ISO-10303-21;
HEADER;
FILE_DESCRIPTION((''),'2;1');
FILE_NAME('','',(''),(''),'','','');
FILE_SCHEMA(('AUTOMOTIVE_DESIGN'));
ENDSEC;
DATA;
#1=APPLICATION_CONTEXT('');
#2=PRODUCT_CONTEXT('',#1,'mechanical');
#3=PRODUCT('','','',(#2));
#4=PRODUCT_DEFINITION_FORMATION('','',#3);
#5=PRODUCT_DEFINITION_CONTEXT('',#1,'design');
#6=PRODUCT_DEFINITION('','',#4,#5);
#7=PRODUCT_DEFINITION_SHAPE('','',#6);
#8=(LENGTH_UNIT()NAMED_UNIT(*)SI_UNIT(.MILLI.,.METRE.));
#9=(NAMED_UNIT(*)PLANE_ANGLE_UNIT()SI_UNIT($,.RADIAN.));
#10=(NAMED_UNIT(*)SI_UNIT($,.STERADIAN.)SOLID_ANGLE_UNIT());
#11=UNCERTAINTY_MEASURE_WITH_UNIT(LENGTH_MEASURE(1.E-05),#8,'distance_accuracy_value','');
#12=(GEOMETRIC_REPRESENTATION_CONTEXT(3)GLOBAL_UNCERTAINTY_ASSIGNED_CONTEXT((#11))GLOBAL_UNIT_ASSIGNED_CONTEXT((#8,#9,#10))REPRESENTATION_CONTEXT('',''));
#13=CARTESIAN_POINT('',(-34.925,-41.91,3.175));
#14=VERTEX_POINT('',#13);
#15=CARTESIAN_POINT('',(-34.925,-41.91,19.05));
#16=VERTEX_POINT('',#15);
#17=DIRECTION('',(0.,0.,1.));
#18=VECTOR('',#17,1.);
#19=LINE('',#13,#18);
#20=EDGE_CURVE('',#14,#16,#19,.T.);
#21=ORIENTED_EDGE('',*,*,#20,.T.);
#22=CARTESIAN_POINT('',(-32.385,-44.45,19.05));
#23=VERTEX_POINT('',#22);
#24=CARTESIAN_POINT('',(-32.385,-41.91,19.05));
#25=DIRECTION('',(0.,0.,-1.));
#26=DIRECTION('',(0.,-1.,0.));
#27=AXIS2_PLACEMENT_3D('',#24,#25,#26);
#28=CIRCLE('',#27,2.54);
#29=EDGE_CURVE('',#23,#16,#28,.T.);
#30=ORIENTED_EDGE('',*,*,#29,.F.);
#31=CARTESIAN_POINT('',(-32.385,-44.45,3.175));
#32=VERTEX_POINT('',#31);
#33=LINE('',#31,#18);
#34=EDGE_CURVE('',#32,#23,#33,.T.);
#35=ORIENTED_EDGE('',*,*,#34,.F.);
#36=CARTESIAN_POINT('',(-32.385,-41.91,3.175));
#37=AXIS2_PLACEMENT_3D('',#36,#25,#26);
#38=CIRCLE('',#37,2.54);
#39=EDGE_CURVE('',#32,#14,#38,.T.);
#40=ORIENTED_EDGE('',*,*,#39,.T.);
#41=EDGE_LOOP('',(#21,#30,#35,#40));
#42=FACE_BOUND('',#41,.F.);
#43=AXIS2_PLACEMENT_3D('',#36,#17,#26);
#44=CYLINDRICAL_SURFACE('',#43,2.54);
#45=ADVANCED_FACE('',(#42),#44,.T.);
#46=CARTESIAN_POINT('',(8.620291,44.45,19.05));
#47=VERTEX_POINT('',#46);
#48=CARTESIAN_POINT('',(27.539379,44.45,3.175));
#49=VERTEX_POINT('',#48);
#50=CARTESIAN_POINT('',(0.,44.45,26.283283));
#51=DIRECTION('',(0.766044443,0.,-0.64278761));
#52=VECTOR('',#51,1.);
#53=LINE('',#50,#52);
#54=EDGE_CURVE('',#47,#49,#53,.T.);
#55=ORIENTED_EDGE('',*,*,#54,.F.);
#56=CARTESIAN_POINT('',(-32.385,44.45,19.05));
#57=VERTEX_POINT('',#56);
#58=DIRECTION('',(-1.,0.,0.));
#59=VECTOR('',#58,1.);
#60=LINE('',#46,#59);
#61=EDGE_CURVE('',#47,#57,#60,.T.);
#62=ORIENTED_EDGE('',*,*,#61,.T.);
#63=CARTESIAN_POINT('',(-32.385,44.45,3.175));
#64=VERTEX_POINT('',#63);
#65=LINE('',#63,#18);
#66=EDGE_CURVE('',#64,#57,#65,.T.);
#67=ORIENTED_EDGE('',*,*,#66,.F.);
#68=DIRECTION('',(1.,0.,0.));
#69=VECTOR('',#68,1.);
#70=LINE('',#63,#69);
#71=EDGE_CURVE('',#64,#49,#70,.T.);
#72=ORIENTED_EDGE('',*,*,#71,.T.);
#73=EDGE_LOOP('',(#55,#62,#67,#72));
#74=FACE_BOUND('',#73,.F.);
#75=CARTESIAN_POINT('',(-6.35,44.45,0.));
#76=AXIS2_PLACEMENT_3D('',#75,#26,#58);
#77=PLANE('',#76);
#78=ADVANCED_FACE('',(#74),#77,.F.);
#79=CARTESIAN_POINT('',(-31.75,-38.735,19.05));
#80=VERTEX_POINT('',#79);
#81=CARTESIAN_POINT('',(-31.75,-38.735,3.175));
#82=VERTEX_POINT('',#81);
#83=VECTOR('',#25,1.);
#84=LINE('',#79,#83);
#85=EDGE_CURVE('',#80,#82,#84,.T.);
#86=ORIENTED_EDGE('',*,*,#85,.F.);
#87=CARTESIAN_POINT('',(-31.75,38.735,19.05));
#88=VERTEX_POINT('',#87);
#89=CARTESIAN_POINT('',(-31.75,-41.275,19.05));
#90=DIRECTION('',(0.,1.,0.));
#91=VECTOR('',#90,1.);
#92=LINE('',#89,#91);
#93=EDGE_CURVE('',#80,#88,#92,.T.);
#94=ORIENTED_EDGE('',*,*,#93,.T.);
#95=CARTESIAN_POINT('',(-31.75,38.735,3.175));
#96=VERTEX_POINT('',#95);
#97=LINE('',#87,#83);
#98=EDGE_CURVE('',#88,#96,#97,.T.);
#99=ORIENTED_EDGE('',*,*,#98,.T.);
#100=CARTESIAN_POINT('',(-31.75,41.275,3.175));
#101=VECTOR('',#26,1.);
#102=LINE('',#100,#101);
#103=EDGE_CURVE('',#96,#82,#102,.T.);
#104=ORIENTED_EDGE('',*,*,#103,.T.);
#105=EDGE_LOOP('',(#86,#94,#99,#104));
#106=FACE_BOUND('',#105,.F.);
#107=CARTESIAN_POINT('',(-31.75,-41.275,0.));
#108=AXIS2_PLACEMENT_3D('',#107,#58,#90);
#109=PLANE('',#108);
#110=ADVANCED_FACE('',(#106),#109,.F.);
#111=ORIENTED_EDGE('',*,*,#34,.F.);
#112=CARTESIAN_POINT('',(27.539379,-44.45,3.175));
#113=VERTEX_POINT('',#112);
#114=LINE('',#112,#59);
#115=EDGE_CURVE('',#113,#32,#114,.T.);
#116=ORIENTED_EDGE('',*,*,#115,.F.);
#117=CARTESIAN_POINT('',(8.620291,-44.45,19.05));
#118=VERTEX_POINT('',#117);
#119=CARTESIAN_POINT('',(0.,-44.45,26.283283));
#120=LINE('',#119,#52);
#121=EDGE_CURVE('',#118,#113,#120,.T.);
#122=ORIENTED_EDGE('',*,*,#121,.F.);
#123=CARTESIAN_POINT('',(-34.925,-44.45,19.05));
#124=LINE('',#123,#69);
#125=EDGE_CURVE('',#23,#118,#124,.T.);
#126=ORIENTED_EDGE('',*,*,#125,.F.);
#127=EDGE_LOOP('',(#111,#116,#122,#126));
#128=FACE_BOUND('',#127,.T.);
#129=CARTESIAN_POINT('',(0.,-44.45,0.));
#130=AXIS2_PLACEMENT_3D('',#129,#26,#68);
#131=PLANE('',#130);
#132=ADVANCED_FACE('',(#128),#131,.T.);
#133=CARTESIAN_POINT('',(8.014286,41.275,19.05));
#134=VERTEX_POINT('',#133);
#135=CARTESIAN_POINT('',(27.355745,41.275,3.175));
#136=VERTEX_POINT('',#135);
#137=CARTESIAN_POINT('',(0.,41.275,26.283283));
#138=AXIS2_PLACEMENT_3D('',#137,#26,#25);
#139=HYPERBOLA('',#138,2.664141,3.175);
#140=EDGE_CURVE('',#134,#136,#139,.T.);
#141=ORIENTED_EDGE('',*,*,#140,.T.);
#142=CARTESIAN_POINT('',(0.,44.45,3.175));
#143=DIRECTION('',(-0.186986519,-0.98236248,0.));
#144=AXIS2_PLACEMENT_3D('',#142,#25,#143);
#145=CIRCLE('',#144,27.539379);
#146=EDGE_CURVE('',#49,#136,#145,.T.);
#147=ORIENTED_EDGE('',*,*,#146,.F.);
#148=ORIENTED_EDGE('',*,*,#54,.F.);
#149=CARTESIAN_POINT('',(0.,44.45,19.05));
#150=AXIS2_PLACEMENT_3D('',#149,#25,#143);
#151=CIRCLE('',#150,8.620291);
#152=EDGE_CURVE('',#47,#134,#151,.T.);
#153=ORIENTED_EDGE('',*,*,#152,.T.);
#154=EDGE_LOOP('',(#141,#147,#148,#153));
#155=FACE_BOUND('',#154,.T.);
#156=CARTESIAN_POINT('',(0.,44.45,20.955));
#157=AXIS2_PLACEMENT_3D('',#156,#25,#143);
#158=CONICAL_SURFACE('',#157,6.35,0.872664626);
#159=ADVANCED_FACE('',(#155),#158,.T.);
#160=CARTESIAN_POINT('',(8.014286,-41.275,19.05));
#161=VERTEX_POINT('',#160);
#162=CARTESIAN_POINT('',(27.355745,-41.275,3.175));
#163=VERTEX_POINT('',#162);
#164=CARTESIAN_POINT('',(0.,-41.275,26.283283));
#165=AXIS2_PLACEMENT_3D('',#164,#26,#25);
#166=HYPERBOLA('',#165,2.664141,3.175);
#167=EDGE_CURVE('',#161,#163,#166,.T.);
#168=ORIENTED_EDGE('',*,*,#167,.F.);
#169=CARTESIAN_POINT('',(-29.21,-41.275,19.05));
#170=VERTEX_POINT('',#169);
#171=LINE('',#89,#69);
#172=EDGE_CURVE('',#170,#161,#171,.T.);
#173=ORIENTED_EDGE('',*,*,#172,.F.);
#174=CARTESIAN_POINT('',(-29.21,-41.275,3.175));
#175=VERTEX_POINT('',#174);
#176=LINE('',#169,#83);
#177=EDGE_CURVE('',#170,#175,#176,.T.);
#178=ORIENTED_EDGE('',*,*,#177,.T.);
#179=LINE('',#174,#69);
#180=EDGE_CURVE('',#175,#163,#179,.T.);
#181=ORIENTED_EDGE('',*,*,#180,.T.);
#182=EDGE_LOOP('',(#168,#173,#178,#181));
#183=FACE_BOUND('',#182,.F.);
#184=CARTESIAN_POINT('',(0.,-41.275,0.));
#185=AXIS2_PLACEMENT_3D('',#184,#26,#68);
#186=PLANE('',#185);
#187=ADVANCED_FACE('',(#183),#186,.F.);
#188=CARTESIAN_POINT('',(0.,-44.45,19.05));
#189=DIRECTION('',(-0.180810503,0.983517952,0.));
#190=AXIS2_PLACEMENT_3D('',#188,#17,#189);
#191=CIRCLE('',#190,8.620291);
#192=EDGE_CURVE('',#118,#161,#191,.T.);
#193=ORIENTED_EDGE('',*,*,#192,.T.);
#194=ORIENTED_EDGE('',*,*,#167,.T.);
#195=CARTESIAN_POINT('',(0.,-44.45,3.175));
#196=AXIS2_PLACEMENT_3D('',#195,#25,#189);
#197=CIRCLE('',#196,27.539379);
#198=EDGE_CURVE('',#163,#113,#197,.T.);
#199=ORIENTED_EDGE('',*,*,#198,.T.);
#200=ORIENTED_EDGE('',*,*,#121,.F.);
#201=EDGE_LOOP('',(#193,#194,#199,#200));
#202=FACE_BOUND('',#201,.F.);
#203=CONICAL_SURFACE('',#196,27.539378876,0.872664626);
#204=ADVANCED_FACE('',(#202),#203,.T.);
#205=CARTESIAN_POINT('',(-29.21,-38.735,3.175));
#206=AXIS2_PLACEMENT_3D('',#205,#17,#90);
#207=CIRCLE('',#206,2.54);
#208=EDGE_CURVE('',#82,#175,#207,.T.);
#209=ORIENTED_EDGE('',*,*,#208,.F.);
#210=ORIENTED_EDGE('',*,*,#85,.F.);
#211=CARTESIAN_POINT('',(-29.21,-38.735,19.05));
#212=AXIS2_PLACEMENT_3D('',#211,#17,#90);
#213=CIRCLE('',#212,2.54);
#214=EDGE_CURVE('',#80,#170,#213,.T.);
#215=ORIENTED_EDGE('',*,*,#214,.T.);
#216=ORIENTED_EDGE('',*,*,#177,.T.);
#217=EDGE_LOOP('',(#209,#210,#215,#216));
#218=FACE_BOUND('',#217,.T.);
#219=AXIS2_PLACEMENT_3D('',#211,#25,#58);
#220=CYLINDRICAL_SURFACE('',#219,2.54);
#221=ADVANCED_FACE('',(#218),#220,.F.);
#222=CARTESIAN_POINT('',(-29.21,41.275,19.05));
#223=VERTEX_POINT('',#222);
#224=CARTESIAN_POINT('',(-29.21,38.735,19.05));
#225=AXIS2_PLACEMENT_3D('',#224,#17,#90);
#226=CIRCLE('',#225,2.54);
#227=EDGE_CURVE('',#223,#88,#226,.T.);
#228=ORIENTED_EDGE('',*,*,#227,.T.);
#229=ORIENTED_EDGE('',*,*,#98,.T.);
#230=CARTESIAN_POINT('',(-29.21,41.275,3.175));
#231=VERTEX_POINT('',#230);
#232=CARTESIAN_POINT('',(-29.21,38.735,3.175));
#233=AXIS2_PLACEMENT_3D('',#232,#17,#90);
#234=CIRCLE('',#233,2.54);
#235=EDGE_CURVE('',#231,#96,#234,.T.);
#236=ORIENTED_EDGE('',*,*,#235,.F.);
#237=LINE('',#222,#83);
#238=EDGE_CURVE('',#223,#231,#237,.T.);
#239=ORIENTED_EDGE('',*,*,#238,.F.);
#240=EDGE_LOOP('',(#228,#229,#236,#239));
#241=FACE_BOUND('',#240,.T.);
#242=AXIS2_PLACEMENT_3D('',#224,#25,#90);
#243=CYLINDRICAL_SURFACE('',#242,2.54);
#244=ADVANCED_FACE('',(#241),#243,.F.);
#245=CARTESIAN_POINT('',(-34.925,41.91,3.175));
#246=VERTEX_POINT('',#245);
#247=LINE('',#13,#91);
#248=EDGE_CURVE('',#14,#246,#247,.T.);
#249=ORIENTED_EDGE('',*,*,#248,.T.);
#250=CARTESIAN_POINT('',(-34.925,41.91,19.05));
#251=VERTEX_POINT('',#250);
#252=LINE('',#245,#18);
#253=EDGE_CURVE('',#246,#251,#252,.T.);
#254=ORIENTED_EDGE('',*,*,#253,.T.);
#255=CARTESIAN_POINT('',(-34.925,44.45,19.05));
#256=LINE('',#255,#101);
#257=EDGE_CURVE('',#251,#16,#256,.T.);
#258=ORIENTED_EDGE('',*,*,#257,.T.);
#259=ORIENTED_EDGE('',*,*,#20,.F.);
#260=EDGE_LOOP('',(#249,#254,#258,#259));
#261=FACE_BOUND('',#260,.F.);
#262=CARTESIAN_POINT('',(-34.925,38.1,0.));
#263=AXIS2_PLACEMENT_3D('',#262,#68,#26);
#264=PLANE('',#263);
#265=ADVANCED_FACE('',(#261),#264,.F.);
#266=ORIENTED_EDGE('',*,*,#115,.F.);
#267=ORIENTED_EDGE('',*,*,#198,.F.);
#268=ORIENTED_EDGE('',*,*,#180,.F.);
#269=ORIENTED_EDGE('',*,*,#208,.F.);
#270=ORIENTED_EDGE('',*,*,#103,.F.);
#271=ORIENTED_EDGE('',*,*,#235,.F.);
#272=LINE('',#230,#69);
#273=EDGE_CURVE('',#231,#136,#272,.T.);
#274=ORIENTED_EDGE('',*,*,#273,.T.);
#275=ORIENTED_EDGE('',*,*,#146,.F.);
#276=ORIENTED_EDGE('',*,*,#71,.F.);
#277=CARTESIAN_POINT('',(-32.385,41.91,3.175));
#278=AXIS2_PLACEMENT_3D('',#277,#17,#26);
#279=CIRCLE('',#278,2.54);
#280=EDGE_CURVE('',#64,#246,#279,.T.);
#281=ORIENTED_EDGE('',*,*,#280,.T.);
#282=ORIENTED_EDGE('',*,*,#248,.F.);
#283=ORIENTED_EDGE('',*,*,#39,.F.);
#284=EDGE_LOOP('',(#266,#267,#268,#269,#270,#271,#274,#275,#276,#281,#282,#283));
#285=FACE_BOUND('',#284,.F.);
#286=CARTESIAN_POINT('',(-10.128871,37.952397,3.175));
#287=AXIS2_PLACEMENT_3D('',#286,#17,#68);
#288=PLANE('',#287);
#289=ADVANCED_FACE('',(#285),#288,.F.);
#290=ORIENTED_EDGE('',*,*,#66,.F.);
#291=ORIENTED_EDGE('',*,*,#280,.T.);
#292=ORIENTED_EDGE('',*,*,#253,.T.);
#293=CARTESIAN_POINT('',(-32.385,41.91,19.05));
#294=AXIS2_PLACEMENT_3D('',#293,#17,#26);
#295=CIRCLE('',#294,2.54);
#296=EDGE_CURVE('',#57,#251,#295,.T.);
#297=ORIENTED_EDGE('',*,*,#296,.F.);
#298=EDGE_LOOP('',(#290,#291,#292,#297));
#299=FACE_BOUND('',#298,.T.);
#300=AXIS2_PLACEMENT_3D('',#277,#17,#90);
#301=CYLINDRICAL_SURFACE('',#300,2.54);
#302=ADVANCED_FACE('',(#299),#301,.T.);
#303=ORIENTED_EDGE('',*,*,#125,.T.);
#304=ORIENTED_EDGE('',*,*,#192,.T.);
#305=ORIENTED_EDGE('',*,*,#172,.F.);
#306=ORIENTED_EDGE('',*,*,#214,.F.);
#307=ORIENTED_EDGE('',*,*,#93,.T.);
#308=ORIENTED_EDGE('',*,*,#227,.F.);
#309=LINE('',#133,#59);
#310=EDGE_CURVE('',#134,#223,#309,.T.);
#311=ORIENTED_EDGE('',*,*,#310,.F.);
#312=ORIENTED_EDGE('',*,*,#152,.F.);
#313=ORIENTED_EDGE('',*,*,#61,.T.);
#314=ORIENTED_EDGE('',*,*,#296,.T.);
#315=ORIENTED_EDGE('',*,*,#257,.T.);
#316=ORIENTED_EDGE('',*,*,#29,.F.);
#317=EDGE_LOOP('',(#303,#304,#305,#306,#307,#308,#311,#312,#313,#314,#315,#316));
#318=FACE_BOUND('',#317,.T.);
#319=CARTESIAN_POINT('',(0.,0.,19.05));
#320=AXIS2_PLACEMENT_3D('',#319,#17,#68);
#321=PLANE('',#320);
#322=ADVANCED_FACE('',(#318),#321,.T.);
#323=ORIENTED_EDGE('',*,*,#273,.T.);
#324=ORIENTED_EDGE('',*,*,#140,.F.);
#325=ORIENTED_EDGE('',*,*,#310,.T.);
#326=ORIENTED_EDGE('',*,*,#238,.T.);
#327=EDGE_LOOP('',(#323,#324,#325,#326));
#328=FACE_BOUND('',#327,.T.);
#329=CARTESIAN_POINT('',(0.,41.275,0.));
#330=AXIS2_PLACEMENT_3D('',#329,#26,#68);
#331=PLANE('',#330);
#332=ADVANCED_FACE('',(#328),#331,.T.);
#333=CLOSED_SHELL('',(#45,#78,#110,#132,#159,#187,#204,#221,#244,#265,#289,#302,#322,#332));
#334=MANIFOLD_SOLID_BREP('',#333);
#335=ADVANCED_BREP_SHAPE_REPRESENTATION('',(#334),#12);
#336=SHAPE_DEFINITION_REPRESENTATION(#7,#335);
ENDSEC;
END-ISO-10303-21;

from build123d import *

# Parameters (mm, degrees)
F1_DEPTH     = 3.175
F2_DEPTH     = 19.05
F3_DEPTH     = 3.175
F4_T4_ANGLE  = 359.64
F4_T11_ANGLE = 359.64
F4_T16_ANGLE = 359.64
F4_T18_ANGLE = 359.64
F5_R         = 2.54
F6_W         = 173.444584012
F6_H         = 315.2023479342
F7_DEPTH     = 3.175


# Not quite as in the source:
# - a fillet or chamfer that OpenCascade refuses, or shapes differently, is made with other operations: its cross-section is extruded or revolved along the edge and cut away or added


with BuildPart() as f1:
    # F0 (on Top) → F1 (new body)
    with BuildSketch(Plane.XY):
        with BuildLine():
            Line((-34.925, 44.45), (-28.575, 44.45))
            ThreePointArc((-28.575, 44.45), (-39.4151280605, 48.9401280605), (-34.925, 38.1))
            Line((-34.925, 38.1), (-34.925, 44.45))
        make_face()
        with BuildLine():
            ThreePointArc((6.35, 44.45), (0, 50.8), (-6.35, 44.45))
            Line((-6.35, 44.45), (6.35, 44.45))
        make_face()
        with BuildLine():
            Line((-34.925, -44.45), (-34.925, -38.1))
            ThreePointArc((-34.925, -38.1), (-39.4151280605, -48.9401280605), (-28.575, -44.45))
            Line((-28.575, -44.45), (-34.925, -44.45))
        make_face()
        with BuildLine():
            Line((6.35, -44.45), (-6.35, -44.45))
            ThreePointArc((-6.35, -44.45), (0, -50.8), (6.35, -44.45))
        make_face()
        with BuildLine():
            ThreePointArc((-28.575, 44.45), (-28.7913710031, 42.8064990636), (-29.425738686, 41.275))
            Line((-29.425738686, 41.275), (-5.499261314, 41.275))
            ThreePointArc((-5.499261314, 41.275), (-6.1336289969, 42.8064990636), (-6.35, 44.45))
            Line((-6.35, 44.45), (-28.575, 44.45))
        make_face()
        with BuildLine():
            Line((-5.499261314, -41.275), (-29.425738686, -41.275))
            ThreePointArc((-29.425738686, -41.275), (-28.7913710031, -42.8064990636), (-28.575, -44.45))
            Line((-28.575, -44.45), (-6.35, -44.45))
            ThreePointArc((-6.35, -44.45), (-6.1336289969, -42.8064990636), (-5.499261314, -41.275))
        make_face()
        with BuildLine():
            Line((-31.75, -38.950738686), (-31.75, 38.950738686))
            ThreePointArc((-31.75, 38.950738686), (-33.2814990636, 38.3163710031), (-34.925, 38.1))
            Line((-34.925, 38.1), (-34.925, -38.1))
            ThreePointArc((-34.925, -38.1), (-33.2814990636, -38.3163710031), (-31.75, -38.950738686))
        make_face()
        with BuildLine():
            Line((-31.75, 38.950738686), (-31.75, 41.275))
            Line((-31.75, 41.275), (-29.425738686, 41.275))
            ThreePointArc((-29.425738686, 41.275), (-28.7913710031, 42.8064990636), (-28.575, 44.45))
            Line((-28.575, 44.45), (-34.925, 44.45))
            Line((-34.925, 44.45), (-34.925, 38.1))
            ThreePointArc((-34.925, 38.1), (-33.2814990636, 38.3163710031), (-31.75, 38.950738686))
        make_face()
        with BuildLine():
            ThreePointArc((-6.35, 44.45), (-6.1336289969, 42.8064990636), (-5.499261314, 41.275))
            Line((-5.499261314, 41.275), (5.499261314, 41.275))
            ThreePointArc((5.499261314, 41.275), (6.1336289969, 42.8064990636), (6.35, 44.45))
            Line((6.35, 44.45), (-6.35, 44.45))
        make_face()
        with BuildLine():
            Line((-31.75, -41.275), (-31.75, -38.950738686))
            ThreePointArc((-31.75, -38.950738686), (-33.2814990636, -38.3163710031), (-34.925, -38.1))
            Line((-34.925, -38.1), (-34.925, -44.45))
            Line((-34.925, -44.45), (-28.575, -44.45))
            ThreePointArc((-28.575, -44.45), (-28.7913710031, -42.8064990636), (-29.425738686, -41.275))
            Line((-29.425738686, -41.275), (-31.75, -41.275))
        make_face()
        with BuildLine():
            Line((5.499261314, -41.275), (-5.499261314, -41.275))
            ThreePointArc((-5.499261314, -41.275), (-6.1336289969, -42.8064990636), (-6.35, -44.45))
            Line((-6.35, -44.45), (6.35, -44.45))
            ThreePointArc((6.35, -44.45), (6.1336289969, -42.8064990636), (5.499261314, -41.275))
        make_face()
    extrude(amount=F1_DEPTH)

    # F0 (on Top) → F2 (join)
    with BuildSketch(Plane.XY):
        with BuildLine():
            ThreePointArc((-28.575, 44.45), (-28.7913710031, 42.8064990636), (-29.425738686, 41.275))
            Line((-29.425738686, 41.275), (-5.499261314, 41.275))
            ThreePointArc((-5.499261314, 41.275), (-6.1336289969, 42.8064990636), (-6.35, 44.45))
            Line((-6.35, 44.45), (-28.575, 44.45))
        make_face()
        with BuildLine():
            ThreePointArc((-6.35, 44.45), (-6.1336289969, 42.8064990636), (-5.499261314, 41.275))
            Line((-5.499261314, 41.275), (5.499261314, 41.275))
            ThreePointArc((5.499261314, 41.275), (6.1336289969, 42.8064990636), (6.35, 44.45))
            Line((6.35, 44.45), (-6.35, 44.45))
        make_face()
        with BuildLine():
            Line((-31.75, 38.950738686), (-31.75, 41.275))
            Line((-31.75, 41.275), (-29.425738686, 41.275))
            ThreePointArc((-29.425738686, 41.275), (-28.7913710031, 42.8064990636), (-28.575, 44.45))
            Line((-28.575, 44.45), (-34.925, 44.45))
            Line((-34.925, 44.45), (-34.925, 38.1))
            ThreePointArc((-34.925, 38.1), (-33.2814990636, 38.3163710031), (-31.75, 38.950738686))
        make_face()
        with BuildLine():
            Line((-31.75, -38.950738686), (-31.75, 38.950738686))
            ThreePointArc((-31.75, 38.950738686), (-33.2814990636, 38.3163710031), (-34.925, 38.1))
            Line((-34.925, 38.1), (-34.925, -38.1))
            ThreePointArc((-34.925, -38.1), (-33.2814990636, -38.3163710031), (-31.75, -38.950738686))
        make_face()
        with BuildLine():
            Line((-31.75, -41.275), (-31.75, -38.950738686))
            ThreePointArc((-31.75, -38.950738686), (-33.2814990636, -38.3163710031), (-34.925, -38.1))
            Line((-34.925, -38.1), (-34.925, -44.45))
            Line((-34.925, -44.45), (-28.575, -44.45))
            ThreePointArc((-28.575, -44.45), (-28.7913710031, -42.8064990636), (-29.425738686, -41.275))
            Line((-29.425738686, -41.275), (-31.75, -41.275))
        make_face()
        with BuildLine():
            Line((-5.499261314, -41.275), (-29.425738686, -41.275))
            ThreePointArc((-29.425738686, -41.275), (-28.7913710031, -42.8064990636), (-28.575, -44.45))
            Line((-28.575, -44.45), (-6.35, -44.45))
            ThreePointArc((-6.35, -44.45), (-6.1336289969, -42.8064990636), (-5.499261314, -41.275))
        make_face()
        with BuildLine():
            Line((5.499261314, -41.275), (-5.499261314, -41.275))
            ThreePointArc((-5.499261314, -41.275), (-6.1336289969, -42.8064990636), (-6.35, -44.45))
            Line((-6.35, -44.45), (6.35, -44.45))
            ThreePointArc((6.35, -44.45), (6.1336289969, -42.8064990636), (5.499261314, -41.275))
        make_face()
    extrude(amount=F2_DEPTH)

    # F0 (on Top) → F3 (join)
    with BuildSketch(Plane.XY):
        with BuildLine():
            ThreePointArc((6.35, 44.45), (6.1336289969, 42.8064990636), (5.499261314, 41.275))
            Line((5.499261314, 41.275), (31.75, 41.275))
            Line((31.75, 41.275), (31.75, -41.275))
            Line((31.75, -41.275), (5.499261314, -41.275))
            ThreePointArc((5.499261314, -41.275), (6.1336289969, -42.8064990636), (6.35, -44.45))
            Line((6.35, -44.45), (34.925, -44.45))
            Line((34.925, -44.45), (34.925, 44.45))
            Line((34.925, 44.45), (6.35, 44.45))
        make_face()
        with BuildLine():
            Line((-5.499261314, 41.275), (-29.425738686, 41.275))
            ThreePointArc((-29.425738686, 41.275), (-30.4348719395, 39.9598719395), (-31.75, 38.950738686))
            Line((-31.75, 38.950738686), (-31.75, -38.950738686))
            ThreePointArc((-31.75, -38.950738686), (-30.4348719395, -39.9598719395), (-29.425738686, -41.275))
            Line((-29.425738686, -41.275), (-5.499261314, -41.275))
            ThreePointArc((-5.499261314, -41.275), (0, -38.1), (5.499261314, -41.275))
            Line((5.499261314, -41.275), (31.75, -41.275))
            Line((31.75, -41.275), (31.75, 41.275))
            Line((31.75, 41.275), (5.499261314, 41.275))
            ThreePointArc((5.499261314, 41.275), (0, 38.1), (-5.499261314, 41.275))
        make_face()
        with BuildLine():
            Line((5.499261314, 41.275), (-5.499261314, 41.275))
            ThreePointArc((-5.499261314, 41.275), (0, 38.1), (5.499261314, 41.275))
        make_face()
        with BuildLine():
            Line((-29.425738686, 41.275), (-31.75, 41.275))
            Line((-31.75, 41.275), (-31.75, 38.950738686))
            ThreePointArc((-31.75, 38.950738686), (-30.4348719395, 39.9598719395), (-29.425738686, 41.275))
        make_face()
        with BuildLine():
            ThreePointArc((5.499261314, -41.275), (0, -38.1), (-5.499261314, -41.275))
            Line((-5.499261314, -41.275), (5.499261314, -41.275))
        make_face()
        with BuildLine():
            ThreePointArc((-29.425738686, -41.275), (-30.4348719395, -39.9598719395), (-31.75, -38.950738686))
            Line((-31.75, -38.950738686), (-31.75, -41.275))
            Line((-31.75, -41.275), (-29.425738686, -41.275))
        make_face()
    extrude(amount=F3_DEPTH)

    # F4: chamfer of 17.78 x 21.1893788763 on 4 edges, made by hand


with BuildPart() as f4_tool2:
    # F4_s3 → F4_t4 (revolve)
    with BuildSketch(Plane(origin=(-7.9045602021, -1.4531788711, 0), x_dir=(0, 0, 1), z_dir=(-0.983517952, -0.1808105031, 0))):
        Polygon((3.175, -16.1779940912), (20.955, -37.3673729675), (3.175, -37.3673729675), align=None)
    revolve(axis=Axis((0, -44.45, 3.175), (0, 0, -1)), revolution_arc=F4_T4_ANGLE)

    split(bisect_by=Plane.XY.offset(19.05), keep=Keep.BOTTOM)

    split(bisect_by=Plane.XZ.offset(44.45), keep=Keep.BOTTOM)

    split(bisect_by=Plane.XZ.offset(41.275), keep=Keep.TOP)


with BuildPart() as f1_1:
    add(f1.part)

    # F4_t1: union F4_tool2
    add(f4_tool2.part)


with BuildPart() as f4_tool9:
    # F4_s10 → F4_t11 (revolve)
    with BuildSketch(Plane(origin=(-8.164955624, 1.5541479455, 0), x_dir=(0, 0, 1), z_dir=(0.9823624798, -0.186986519, 0))):
        Polygon((20.955, -37.3160122271), (3.175, -16.1266333508), (3.175, -37.3160122271), align=None)
    revolve(axis=Axis((0, 44.45, 3.175), (0, 0, -1)), revolution_arc=F4_T11_ANGLE)

    split(bisect_by=Plane.XZ.offset(-44.45), keep=Keep.TOP)

    split(bisect_by=Plane.XY.offset(19.05), keep=Keep.BOTTOM)

    split(bisect_by=Plane.XZ.offset(-41.275), keep=Keep.BOTTOM)


with BuildPart() as f1_2:
    add(f1_1.part)

    # F4_t8: union F4_tool9
    add(f4_tool9.part)

    # F4_s15 → F4_t16 (revolve, cut)
    with BuildSketch(Plane(origin=(-0.1396428746, -0.0004387025, 0), x_dir=(0, 0, 1), z_dir=(0.9999950652, 0.0031415875, 0))):
        Polygon((-14.605, 38.0997806482), (-9.276717342, 44.4497806482), (3.175, 44.4497806482), (3.175, 38.0997806482), align=None)
    revolve(axis=Axis((0, -44.45, 3.175), (0, 0, 1)), revolution_arc=F4_T16_ANGLE, mode=Mode.SUBTRACT)

    # F4_s17 → F4_t18 (revolve, cut)
    with BuildSketch(Plane(origin=(0.1396428746, 0.0004387025, 0), x_dir=(0, 0, 1), z_dir=(-0.9999950652, -0.0031415875, 0))):
        Polygon((-14.605, 38.0997806482), (-9.276717342, 44.4497806482), (3.175, 44.4497806482), (3.175, 38.0997806482), align=None)
    revolve(axis=Axis((0, 44.45, 3.175), (0, 0, 1)), revolution_arc=F4_T18_ANGLE, mode=Mode.SUBTRACT)

    # F5
    f5_edges = [f1_2.edges().sort_by_distance(p)[0] for p in [
        (-31.75, 41.275, 11.1125),
        (-31.75, -41.275, 11.1125),
        (-34.925, -44.45, 11.1125),
        (-34.925, 44.45, 11.1125),
    ]]
    fillet(f5_edges, radius=F5_R)

    # F6 (on Top) → F7 (cut)
    with BuildSketch(Plane.XY):
        with Locations((-10.1288706064, 37.9523970187)):
            Rectangle(F6_W, F6_H)
    extrude(amount=F7_DEPTH, mode=Mode.SUBTRACT)


solid = f1_2.part
